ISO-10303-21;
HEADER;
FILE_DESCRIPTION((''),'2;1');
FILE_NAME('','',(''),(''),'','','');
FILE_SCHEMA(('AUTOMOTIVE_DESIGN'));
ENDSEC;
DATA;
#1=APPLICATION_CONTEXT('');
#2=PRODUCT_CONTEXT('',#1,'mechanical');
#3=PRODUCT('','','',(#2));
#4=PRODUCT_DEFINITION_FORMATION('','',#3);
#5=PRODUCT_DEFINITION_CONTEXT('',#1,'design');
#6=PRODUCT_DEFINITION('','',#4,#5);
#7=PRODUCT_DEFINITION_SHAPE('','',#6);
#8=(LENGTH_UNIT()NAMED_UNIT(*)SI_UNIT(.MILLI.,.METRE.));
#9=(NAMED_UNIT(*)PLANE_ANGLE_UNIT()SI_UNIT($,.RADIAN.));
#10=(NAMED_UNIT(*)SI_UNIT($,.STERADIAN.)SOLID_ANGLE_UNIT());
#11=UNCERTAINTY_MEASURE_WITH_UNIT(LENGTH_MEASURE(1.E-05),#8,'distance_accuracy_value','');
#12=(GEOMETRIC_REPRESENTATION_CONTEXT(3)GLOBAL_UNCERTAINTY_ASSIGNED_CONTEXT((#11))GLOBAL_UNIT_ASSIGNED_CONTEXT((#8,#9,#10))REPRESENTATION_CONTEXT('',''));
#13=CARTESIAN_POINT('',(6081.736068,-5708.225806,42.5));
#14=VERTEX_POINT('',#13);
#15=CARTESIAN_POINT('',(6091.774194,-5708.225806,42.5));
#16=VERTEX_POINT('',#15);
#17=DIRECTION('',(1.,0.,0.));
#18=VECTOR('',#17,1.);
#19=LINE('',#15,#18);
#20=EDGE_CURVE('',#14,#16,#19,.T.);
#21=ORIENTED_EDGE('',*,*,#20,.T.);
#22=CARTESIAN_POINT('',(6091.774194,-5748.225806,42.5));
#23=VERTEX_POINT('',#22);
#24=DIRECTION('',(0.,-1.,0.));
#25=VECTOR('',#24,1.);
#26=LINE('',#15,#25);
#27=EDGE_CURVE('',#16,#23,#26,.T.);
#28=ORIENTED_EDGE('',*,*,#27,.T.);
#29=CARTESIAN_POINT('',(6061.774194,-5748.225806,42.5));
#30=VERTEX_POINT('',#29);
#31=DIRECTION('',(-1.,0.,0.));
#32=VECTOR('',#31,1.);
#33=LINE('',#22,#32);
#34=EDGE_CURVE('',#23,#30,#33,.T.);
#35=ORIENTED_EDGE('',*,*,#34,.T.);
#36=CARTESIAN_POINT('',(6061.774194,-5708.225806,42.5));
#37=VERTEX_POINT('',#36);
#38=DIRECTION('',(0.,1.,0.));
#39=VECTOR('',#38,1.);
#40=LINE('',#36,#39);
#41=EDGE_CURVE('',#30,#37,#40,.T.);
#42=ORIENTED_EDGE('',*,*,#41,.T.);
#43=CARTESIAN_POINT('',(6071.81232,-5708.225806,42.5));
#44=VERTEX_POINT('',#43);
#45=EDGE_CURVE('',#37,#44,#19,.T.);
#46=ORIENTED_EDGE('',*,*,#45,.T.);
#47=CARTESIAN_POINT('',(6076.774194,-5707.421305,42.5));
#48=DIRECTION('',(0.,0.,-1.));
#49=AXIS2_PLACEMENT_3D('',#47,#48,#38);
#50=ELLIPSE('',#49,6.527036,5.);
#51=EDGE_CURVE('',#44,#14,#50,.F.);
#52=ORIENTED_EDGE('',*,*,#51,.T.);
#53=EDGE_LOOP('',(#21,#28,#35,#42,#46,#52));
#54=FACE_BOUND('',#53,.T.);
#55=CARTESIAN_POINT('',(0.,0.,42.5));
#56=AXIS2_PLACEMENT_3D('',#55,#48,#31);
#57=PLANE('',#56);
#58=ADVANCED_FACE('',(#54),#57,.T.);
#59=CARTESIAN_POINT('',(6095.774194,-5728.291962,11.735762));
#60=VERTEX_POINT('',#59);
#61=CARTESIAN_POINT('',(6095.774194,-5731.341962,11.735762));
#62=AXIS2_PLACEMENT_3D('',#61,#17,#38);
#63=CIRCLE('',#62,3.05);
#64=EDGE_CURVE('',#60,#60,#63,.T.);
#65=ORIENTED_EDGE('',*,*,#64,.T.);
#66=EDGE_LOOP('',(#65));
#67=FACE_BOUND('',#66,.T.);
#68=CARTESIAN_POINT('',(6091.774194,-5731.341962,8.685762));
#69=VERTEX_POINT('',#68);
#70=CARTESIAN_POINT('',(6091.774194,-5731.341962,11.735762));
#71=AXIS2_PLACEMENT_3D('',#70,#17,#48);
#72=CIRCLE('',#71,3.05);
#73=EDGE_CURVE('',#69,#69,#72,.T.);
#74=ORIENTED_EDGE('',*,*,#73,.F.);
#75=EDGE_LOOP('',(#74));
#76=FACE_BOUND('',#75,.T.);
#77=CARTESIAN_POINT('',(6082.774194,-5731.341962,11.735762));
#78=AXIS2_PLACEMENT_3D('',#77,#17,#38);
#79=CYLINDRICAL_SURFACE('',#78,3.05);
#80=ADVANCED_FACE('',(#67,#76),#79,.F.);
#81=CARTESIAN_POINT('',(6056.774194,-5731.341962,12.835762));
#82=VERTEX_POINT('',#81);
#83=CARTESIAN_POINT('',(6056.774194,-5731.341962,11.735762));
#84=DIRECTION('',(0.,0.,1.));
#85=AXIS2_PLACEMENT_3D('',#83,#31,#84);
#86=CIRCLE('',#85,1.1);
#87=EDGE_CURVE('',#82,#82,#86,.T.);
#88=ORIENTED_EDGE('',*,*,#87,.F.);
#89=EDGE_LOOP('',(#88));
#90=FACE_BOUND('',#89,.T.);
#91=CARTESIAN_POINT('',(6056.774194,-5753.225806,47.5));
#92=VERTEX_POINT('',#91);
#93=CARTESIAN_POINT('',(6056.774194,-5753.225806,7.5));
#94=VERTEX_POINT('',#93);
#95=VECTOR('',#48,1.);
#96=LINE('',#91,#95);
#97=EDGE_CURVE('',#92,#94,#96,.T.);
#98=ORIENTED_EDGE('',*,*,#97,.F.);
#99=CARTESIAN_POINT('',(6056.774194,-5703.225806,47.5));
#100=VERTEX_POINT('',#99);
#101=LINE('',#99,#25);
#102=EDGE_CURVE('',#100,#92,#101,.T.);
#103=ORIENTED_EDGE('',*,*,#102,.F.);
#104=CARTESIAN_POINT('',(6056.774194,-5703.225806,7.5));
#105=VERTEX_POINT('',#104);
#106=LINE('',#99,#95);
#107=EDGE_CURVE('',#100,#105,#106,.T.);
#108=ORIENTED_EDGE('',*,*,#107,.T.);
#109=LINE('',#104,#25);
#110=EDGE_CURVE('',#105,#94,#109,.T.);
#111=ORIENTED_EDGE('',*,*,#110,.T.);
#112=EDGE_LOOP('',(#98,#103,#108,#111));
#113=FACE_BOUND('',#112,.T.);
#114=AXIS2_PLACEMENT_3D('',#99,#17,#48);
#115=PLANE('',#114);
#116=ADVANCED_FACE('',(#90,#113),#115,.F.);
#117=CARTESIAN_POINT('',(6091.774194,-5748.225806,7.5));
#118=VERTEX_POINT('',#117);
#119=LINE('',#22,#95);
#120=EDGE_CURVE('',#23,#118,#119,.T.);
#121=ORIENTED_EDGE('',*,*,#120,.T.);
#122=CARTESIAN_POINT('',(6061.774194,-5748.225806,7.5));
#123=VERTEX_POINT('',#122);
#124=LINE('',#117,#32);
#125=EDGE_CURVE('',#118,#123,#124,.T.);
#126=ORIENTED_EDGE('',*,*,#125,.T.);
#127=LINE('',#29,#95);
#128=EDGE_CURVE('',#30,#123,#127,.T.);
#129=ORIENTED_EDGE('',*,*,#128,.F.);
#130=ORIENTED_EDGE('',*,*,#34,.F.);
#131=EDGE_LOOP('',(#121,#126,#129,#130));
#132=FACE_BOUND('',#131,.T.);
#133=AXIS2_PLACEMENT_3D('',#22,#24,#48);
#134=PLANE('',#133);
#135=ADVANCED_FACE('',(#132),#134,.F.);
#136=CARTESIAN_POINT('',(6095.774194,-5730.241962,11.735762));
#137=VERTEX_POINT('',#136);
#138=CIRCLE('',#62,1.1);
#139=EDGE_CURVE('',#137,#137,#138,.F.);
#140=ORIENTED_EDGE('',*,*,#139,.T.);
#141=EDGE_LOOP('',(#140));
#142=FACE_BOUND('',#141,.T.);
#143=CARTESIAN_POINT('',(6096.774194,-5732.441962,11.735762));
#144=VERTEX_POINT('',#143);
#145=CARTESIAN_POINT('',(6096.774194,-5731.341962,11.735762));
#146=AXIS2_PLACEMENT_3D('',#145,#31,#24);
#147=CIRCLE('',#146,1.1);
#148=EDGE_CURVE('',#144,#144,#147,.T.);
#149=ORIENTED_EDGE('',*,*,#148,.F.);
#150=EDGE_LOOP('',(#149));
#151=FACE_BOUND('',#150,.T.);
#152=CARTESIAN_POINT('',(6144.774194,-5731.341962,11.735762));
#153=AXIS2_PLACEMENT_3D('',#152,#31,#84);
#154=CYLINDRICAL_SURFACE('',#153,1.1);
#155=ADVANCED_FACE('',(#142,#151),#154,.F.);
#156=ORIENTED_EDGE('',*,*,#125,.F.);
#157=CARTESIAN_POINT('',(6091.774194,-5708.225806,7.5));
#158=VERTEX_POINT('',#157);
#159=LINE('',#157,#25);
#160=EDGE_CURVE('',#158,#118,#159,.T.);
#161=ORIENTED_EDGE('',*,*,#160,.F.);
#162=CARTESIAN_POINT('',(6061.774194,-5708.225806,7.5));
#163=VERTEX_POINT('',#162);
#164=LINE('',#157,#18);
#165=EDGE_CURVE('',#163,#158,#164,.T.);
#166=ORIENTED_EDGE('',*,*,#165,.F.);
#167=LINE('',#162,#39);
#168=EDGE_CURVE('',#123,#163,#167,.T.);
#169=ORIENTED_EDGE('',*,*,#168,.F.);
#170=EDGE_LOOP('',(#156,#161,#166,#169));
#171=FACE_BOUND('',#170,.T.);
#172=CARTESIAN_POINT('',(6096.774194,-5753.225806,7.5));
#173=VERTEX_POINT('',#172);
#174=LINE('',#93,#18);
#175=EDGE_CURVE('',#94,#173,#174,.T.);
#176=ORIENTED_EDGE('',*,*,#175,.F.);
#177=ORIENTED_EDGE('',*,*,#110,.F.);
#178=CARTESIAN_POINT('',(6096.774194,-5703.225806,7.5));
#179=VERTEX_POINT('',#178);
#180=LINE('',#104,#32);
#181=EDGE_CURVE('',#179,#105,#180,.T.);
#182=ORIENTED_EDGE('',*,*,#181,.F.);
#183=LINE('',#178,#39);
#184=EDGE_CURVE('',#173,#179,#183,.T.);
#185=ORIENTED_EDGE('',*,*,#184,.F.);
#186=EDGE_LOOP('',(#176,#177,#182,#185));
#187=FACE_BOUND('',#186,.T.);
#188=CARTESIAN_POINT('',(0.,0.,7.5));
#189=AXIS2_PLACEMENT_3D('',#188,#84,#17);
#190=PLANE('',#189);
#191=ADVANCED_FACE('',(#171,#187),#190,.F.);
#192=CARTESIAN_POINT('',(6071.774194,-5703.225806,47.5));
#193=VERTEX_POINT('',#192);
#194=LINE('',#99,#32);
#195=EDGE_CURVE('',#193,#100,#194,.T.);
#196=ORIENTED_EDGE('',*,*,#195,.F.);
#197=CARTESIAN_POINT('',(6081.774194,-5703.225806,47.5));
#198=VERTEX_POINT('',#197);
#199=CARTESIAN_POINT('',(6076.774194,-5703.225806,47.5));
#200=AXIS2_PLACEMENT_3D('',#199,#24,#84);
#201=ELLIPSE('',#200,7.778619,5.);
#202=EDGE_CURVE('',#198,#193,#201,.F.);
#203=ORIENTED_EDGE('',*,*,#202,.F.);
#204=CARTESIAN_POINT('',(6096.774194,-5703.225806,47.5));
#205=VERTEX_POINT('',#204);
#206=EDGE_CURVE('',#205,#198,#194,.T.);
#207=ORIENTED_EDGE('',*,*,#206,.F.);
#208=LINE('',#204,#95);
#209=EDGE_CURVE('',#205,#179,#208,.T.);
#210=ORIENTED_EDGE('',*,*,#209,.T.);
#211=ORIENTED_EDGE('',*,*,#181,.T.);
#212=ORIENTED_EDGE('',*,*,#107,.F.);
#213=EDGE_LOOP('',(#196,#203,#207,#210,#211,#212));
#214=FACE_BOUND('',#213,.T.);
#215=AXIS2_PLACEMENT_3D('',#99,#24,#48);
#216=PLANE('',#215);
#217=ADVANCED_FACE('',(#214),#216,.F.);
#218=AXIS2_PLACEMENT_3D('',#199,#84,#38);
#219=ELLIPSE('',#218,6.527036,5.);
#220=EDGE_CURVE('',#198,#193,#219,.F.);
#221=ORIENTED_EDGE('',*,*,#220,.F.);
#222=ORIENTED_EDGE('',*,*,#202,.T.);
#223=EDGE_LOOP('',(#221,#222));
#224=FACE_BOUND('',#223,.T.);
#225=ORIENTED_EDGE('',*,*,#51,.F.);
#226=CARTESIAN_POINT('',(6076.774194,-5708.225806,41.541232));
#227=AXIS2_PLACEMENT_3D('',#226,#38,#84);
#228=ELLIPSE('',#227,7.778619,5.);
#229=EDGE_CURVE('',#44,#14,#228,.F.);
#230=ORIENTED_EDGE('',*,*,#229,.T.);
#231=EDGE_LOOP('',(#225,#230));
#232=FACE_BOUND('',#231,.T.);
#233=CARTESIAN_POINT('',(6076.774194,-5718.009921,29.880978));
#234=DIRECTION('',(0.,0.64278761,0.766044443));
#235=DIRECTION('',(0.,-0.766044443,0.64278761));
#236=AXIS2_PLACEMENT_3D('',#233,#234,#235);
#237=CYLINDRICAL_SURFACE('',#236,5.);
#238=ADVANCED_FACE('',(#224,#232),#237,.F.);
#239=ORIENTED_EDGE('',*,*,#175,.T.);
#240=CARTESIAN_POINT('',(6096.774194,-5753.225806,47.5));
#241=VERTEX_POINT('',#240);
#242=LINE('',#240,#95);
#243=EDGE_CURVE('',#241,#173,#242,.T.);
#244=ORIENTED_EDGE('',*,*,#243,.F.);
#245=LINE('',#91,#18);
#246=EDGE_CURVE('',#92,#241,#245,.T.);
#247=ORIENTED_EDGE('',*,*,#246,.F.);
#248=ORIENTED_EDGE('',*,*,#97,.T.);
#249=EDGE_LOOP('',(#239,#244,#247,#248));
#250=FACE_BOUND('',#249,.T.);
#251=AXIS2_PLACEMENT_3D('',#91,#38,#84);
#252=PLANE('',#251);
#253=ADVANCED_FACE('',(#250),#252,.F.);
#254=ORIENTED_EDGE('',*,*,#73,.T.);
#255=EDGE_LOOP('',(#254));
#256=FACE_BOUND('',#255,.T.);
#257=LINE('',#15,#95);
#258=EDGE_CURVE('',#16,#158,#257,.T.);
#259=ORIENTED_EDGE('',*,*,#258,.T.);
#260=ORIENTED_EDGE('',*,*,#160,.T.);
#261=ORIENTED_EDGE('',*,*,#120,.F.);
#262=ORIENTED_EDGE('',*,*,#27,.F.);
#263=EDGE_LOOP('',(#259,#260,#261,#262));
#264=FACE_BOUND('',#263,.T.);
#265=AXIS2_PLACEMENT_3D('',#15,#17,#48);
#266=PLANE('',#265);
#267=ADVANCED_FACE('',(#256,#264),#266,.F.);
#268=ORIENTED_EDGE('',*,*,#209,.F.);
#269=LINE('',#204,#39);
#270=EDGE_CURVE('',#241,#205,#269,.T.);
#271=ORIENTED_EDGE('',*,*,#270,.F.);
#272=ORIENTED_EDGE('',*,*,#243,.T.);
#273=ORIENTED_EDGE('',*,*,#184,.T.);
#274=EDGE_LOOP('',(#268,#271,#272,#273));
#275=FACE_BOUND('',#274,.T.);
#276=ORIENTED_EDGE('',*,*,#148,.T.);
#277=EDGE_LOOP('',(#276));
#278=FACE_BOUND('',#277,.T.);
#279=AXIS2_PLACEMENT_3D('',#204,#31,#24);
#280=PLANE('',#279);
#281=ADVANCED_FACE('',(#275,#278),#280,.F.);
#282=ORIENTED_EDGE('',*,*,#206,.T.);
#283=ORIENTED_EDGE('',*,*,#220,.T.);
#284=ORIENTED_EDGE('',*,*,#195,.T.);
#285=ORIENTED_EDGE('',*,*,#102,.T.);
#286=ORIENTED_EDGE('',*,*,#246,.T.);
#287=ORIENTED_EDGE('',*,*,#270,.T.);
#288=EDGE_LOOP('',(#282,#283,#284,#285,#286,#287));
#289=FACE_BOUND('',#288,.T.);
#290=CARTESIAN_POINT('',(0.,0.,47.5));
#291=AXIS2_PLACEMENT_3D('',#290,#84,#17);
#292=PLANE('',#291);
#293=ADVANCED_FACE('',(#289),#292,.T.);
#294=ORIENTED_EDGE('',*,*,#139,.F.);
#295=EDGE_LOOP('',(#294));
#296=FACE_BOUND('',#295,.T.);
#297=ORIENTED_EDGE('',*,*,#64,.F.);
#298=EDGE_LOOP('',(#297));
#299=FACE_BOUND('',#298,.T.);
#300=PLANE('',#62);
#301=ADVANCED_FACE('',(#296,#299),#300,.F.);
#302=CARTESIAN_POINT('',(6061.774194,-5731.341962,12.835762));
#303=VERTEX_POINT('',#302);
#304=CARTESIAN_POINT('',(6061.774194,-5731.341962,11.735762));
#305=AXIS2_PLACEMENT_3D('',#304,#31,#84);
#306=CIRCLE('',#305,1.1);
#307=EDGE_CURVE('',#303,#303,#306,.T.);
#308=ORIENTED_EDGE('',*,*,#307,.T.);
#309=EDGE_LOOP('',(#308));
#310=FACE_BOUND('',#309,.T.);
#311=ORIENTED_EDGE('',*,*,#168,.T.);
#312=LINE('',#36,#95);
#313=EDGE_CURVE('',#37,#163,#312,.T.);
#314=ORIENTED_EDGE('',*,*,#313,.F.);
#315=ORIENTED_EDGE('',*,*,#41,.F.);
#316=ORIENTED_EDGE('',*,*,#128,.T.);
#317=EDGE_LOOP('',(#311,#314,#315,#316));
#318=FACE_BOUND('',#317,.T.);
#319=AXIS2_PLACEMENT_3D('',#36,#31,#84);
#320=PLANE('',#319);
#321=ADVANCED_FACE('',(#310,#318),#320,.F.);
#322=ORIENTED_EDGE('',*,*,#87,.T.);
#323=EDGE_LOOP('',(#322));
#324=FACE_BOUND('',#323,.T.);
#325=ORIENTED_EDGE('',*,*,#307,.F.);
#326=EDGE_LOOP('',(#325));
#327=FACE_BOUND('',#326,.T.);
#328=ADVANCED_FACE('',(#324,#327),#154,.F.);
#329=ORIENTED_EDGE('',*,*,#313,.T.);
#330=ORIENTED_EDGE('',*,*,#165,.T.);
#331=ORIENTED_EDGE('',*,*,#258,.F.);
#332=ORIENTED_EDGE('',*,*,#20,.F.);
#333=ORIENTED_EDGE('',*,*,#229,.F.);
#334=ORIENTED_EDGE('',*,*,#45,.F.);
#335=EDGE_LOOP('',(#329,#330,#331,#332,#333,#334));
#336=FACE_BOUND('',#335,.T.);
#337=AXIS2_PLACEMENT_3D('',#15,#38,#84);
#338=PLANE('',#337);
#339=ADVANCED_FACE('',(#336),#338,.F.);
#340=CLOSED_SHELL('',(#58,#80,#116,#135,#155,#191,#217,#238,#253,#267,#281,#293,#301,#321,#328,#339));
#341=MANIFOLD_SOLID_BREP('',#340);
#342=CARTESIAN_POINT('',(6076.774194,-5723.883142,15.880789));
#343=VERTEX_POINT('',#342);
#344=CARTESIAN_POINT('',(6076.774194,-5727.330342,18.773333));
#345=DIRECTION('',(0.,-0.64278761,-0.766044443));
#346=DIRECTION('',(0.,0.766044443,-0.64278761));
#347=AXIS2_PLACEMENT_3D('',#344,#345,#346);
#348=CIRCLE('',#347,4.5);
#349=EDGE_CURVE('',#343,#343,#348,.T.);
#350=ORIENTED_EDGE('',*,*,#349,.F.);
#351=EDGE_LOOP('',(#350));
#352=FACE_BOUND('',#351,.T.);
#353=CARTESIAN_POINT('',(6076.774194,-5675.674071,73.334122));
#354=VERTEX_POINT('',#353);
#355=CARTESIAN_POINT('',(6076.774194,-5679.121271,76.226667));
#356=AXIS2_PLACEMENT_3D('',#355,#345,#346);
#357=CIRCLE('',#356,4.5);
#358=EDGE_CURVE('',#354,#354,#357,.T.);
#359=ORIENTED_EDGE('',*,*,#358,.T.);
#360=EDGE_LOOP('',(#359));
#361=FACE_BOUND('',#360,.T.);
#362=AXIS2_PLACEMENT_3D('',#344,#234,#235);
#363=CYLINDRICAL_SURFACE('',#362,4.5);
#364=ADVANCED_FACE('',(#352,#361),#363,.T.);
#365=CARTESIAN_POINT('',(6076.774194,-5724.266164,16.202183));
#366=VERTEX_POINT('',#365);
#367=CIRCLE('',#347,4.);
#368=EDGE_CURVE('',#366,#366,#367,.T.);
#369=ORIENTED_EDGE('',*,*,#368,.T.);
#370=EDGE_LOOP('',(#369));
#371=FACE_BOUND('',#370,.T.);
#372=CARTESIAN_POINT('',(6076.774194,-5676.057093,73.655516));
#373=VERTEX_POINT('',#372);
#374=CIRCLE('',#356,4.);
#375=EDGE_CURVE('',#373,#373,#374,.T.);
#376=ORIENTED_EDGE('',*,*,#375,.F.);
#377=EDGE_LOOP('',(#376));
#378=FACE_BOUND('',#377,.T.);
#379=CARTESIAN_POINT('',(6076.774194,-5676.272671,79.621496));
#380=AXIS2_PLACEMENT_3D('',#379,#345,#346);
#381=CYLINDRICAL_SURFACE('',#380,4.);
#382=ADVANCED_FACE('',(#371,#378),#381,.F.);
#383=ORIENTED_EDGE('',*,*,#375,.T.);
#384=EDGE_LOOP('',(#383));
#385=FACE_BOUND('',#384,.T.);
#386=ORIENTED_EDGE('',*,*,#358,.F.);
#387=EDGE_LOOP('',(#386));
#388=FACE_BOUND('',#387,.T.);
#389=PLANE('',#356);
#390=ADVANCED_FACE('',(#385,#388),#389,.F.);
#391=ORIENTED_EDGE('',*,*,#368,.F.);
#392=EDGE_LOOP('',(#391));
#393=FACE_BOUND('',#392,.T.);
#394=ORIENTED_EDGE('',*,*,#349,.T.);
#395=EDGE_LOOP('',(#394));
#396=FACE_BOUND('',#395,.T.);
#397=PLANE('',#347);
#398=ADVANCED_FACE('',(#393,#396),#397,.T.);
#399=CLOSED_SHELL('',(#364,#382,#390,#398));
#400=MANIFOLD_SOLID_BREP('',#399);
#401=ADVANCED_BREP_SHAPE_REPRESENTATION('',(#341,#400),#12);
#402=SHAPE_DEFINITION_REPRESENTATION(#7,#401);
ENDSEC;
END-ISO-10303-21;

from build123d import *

# Parameters (mm, degrees)
BOSS_EXTRUDE1_START      = 7.5
BOSS_EXTRUDE1_OUTLINE_W  = 40
BOSS_EXTRUDE1_OUTLINE_H  = 50
BOSS_EXTRUDE1_DEPTH      = 40
SKETCH2_W                = 30
SKETCH2_H                = 40
CUT_EXTRUDE1_DEPTH       = 35
SKETCH5_R                = 5
CUT_EXTRUDE2_DEPTH       = 23
SKETCH6_R                = 1.1
CUT_EXTRUDE3_DEPTH       = 88
BOSS_EXTRUDE2_DEPTH      = 37.5
BOSS_EXTRUDE2_DEPTH_BACK = 37.5
SKETCH10_R               = 4.5
SKETCH11_R               = 4
CUT_EXTRUDE6_DEPTH       = 7553.882843097
CUT_EXTRUDE7_START       = -1
SKETCH12_R               = 3.05
CUT_EXTRUDE7_DEPTH       = 13


# Read off the part's stored shape, not the designer's step: Boss-Extrude1
with BuildPart() as part:
    # Boss-Extrude1 outline → Boss-Extrude1 (new body)
    with BuildSketch(Plane.XY.offset(BOSS_EXTRUDE1_START)):
        with Locations((6076.774193548, -5728.225806452)):
            Rectangle(BOSS_EXTRUDE1_OUTLINE_W, BOSS_EXTRUDE1_OUTLINE_H)
    extrude(amount=BOSS_EXTRUDE1_DEPTH)

    # Sketch2 → Cut-Extrude1 (cut)
    with BuildSketch(Plane(origin=(0, 0, 7.5), x_dir=(-1, 0, 0), z_dir=(0, 0, -1))):
        with Locations((-6076.774193548, -5728.225806452)):
            Rectangle(SKETCH2_W, SKETCH2_H)
    extrude(amount=-CUT_EXTRUDE1_DEPTH, mode=Mode.SUBTRACT)

    # Sketch5 → Cut-Extrude2 (cut)
    with BuildSketch(Plane(origin=(0, -2333.046335035, -2780.416351467), x_dir=(-1, 0, 0), z_dir=(0, -0.6427876096865405, -0.766044443118977))):
        with Locations(Location((-6076.774193548, -4399.456848345, 0), (0, 0, 352.919898765))):
            Circle(SKETCH5_R)
    extrude(amount=CUT_EXTRUDE2_DEPTH, mode=Mode.SUBTRACT)

    # Sketch6 → Cut-Extrude3 (cut)
    with BuildSketch(Plane.ZY.offset(-6056.774193548)):
        with Locations((11.735762475, -5731.341961902)):
            Circle(SKETCH6_R)
    extrude(amount=-CUT_EXTRUDE3_DEPTH, mode=Mode.SUBTRACT)

    # Sketch12 → Cut-Extrude7 (cut)
    with BuildSketch(Plane(origin=(6096.774193548, 0, 0), x_dir=(0, 0, -1), z_dir=(1, 0, 0)).offset(CUT_EXTRUDE7_START)):
        with Locations(Location((-11.735762475, -5731.341961902, 0), (0, 0, 90))):
            Circle(SKETCH12_R)
    extrude(amount=-CUT_EXTRUDE7_DEPTH, mode=Mode.SUBTRACT)


with BuildPart() as body_2:
    # Sketch10 → Boss-Extrude2 (new, two sides: drawn at the far end of the back side and taken through both)
    with BuildSketch(Plane(origin=(0, -2333.046335035, -2780.416351467), x_dir=(-1, 0, 0), z_dir=(0, -0.6427876096865405, -0.766044443118977)).offset(-BOSS_EXTRUDE2_DEPTH_BACK)):
        with Locations(Location((-6076.774193548, -4399.456848345, 0), (0, 0, 90))):
            Circle(SKETCH10_R)
    extrude(amount=BOSS_EXTRUDE2_DEPTH + BOSS_EXTRUDE2_DEPTH_BACK)

    # Sketch11 → Cut-Extrude6 (cut, through all)
    with BuildSketch(Plane(origin=(0, -2357.150870398, -2809.143018084), x_dir=(1, 0, 0), z_dir=(0, -0.6427876096865406, -0.766044443118977))):
        with Locations(Location((6076.774193548, 4399.456848345, 0), (0, 0, 270))):
            Circle(SKETCH11_R)
    extrude(amount=-CUT_EXTRUDE6_DEPTH, mode=Mode.SUBTRACT)


solid = Compound([part.part, body_2.part])
